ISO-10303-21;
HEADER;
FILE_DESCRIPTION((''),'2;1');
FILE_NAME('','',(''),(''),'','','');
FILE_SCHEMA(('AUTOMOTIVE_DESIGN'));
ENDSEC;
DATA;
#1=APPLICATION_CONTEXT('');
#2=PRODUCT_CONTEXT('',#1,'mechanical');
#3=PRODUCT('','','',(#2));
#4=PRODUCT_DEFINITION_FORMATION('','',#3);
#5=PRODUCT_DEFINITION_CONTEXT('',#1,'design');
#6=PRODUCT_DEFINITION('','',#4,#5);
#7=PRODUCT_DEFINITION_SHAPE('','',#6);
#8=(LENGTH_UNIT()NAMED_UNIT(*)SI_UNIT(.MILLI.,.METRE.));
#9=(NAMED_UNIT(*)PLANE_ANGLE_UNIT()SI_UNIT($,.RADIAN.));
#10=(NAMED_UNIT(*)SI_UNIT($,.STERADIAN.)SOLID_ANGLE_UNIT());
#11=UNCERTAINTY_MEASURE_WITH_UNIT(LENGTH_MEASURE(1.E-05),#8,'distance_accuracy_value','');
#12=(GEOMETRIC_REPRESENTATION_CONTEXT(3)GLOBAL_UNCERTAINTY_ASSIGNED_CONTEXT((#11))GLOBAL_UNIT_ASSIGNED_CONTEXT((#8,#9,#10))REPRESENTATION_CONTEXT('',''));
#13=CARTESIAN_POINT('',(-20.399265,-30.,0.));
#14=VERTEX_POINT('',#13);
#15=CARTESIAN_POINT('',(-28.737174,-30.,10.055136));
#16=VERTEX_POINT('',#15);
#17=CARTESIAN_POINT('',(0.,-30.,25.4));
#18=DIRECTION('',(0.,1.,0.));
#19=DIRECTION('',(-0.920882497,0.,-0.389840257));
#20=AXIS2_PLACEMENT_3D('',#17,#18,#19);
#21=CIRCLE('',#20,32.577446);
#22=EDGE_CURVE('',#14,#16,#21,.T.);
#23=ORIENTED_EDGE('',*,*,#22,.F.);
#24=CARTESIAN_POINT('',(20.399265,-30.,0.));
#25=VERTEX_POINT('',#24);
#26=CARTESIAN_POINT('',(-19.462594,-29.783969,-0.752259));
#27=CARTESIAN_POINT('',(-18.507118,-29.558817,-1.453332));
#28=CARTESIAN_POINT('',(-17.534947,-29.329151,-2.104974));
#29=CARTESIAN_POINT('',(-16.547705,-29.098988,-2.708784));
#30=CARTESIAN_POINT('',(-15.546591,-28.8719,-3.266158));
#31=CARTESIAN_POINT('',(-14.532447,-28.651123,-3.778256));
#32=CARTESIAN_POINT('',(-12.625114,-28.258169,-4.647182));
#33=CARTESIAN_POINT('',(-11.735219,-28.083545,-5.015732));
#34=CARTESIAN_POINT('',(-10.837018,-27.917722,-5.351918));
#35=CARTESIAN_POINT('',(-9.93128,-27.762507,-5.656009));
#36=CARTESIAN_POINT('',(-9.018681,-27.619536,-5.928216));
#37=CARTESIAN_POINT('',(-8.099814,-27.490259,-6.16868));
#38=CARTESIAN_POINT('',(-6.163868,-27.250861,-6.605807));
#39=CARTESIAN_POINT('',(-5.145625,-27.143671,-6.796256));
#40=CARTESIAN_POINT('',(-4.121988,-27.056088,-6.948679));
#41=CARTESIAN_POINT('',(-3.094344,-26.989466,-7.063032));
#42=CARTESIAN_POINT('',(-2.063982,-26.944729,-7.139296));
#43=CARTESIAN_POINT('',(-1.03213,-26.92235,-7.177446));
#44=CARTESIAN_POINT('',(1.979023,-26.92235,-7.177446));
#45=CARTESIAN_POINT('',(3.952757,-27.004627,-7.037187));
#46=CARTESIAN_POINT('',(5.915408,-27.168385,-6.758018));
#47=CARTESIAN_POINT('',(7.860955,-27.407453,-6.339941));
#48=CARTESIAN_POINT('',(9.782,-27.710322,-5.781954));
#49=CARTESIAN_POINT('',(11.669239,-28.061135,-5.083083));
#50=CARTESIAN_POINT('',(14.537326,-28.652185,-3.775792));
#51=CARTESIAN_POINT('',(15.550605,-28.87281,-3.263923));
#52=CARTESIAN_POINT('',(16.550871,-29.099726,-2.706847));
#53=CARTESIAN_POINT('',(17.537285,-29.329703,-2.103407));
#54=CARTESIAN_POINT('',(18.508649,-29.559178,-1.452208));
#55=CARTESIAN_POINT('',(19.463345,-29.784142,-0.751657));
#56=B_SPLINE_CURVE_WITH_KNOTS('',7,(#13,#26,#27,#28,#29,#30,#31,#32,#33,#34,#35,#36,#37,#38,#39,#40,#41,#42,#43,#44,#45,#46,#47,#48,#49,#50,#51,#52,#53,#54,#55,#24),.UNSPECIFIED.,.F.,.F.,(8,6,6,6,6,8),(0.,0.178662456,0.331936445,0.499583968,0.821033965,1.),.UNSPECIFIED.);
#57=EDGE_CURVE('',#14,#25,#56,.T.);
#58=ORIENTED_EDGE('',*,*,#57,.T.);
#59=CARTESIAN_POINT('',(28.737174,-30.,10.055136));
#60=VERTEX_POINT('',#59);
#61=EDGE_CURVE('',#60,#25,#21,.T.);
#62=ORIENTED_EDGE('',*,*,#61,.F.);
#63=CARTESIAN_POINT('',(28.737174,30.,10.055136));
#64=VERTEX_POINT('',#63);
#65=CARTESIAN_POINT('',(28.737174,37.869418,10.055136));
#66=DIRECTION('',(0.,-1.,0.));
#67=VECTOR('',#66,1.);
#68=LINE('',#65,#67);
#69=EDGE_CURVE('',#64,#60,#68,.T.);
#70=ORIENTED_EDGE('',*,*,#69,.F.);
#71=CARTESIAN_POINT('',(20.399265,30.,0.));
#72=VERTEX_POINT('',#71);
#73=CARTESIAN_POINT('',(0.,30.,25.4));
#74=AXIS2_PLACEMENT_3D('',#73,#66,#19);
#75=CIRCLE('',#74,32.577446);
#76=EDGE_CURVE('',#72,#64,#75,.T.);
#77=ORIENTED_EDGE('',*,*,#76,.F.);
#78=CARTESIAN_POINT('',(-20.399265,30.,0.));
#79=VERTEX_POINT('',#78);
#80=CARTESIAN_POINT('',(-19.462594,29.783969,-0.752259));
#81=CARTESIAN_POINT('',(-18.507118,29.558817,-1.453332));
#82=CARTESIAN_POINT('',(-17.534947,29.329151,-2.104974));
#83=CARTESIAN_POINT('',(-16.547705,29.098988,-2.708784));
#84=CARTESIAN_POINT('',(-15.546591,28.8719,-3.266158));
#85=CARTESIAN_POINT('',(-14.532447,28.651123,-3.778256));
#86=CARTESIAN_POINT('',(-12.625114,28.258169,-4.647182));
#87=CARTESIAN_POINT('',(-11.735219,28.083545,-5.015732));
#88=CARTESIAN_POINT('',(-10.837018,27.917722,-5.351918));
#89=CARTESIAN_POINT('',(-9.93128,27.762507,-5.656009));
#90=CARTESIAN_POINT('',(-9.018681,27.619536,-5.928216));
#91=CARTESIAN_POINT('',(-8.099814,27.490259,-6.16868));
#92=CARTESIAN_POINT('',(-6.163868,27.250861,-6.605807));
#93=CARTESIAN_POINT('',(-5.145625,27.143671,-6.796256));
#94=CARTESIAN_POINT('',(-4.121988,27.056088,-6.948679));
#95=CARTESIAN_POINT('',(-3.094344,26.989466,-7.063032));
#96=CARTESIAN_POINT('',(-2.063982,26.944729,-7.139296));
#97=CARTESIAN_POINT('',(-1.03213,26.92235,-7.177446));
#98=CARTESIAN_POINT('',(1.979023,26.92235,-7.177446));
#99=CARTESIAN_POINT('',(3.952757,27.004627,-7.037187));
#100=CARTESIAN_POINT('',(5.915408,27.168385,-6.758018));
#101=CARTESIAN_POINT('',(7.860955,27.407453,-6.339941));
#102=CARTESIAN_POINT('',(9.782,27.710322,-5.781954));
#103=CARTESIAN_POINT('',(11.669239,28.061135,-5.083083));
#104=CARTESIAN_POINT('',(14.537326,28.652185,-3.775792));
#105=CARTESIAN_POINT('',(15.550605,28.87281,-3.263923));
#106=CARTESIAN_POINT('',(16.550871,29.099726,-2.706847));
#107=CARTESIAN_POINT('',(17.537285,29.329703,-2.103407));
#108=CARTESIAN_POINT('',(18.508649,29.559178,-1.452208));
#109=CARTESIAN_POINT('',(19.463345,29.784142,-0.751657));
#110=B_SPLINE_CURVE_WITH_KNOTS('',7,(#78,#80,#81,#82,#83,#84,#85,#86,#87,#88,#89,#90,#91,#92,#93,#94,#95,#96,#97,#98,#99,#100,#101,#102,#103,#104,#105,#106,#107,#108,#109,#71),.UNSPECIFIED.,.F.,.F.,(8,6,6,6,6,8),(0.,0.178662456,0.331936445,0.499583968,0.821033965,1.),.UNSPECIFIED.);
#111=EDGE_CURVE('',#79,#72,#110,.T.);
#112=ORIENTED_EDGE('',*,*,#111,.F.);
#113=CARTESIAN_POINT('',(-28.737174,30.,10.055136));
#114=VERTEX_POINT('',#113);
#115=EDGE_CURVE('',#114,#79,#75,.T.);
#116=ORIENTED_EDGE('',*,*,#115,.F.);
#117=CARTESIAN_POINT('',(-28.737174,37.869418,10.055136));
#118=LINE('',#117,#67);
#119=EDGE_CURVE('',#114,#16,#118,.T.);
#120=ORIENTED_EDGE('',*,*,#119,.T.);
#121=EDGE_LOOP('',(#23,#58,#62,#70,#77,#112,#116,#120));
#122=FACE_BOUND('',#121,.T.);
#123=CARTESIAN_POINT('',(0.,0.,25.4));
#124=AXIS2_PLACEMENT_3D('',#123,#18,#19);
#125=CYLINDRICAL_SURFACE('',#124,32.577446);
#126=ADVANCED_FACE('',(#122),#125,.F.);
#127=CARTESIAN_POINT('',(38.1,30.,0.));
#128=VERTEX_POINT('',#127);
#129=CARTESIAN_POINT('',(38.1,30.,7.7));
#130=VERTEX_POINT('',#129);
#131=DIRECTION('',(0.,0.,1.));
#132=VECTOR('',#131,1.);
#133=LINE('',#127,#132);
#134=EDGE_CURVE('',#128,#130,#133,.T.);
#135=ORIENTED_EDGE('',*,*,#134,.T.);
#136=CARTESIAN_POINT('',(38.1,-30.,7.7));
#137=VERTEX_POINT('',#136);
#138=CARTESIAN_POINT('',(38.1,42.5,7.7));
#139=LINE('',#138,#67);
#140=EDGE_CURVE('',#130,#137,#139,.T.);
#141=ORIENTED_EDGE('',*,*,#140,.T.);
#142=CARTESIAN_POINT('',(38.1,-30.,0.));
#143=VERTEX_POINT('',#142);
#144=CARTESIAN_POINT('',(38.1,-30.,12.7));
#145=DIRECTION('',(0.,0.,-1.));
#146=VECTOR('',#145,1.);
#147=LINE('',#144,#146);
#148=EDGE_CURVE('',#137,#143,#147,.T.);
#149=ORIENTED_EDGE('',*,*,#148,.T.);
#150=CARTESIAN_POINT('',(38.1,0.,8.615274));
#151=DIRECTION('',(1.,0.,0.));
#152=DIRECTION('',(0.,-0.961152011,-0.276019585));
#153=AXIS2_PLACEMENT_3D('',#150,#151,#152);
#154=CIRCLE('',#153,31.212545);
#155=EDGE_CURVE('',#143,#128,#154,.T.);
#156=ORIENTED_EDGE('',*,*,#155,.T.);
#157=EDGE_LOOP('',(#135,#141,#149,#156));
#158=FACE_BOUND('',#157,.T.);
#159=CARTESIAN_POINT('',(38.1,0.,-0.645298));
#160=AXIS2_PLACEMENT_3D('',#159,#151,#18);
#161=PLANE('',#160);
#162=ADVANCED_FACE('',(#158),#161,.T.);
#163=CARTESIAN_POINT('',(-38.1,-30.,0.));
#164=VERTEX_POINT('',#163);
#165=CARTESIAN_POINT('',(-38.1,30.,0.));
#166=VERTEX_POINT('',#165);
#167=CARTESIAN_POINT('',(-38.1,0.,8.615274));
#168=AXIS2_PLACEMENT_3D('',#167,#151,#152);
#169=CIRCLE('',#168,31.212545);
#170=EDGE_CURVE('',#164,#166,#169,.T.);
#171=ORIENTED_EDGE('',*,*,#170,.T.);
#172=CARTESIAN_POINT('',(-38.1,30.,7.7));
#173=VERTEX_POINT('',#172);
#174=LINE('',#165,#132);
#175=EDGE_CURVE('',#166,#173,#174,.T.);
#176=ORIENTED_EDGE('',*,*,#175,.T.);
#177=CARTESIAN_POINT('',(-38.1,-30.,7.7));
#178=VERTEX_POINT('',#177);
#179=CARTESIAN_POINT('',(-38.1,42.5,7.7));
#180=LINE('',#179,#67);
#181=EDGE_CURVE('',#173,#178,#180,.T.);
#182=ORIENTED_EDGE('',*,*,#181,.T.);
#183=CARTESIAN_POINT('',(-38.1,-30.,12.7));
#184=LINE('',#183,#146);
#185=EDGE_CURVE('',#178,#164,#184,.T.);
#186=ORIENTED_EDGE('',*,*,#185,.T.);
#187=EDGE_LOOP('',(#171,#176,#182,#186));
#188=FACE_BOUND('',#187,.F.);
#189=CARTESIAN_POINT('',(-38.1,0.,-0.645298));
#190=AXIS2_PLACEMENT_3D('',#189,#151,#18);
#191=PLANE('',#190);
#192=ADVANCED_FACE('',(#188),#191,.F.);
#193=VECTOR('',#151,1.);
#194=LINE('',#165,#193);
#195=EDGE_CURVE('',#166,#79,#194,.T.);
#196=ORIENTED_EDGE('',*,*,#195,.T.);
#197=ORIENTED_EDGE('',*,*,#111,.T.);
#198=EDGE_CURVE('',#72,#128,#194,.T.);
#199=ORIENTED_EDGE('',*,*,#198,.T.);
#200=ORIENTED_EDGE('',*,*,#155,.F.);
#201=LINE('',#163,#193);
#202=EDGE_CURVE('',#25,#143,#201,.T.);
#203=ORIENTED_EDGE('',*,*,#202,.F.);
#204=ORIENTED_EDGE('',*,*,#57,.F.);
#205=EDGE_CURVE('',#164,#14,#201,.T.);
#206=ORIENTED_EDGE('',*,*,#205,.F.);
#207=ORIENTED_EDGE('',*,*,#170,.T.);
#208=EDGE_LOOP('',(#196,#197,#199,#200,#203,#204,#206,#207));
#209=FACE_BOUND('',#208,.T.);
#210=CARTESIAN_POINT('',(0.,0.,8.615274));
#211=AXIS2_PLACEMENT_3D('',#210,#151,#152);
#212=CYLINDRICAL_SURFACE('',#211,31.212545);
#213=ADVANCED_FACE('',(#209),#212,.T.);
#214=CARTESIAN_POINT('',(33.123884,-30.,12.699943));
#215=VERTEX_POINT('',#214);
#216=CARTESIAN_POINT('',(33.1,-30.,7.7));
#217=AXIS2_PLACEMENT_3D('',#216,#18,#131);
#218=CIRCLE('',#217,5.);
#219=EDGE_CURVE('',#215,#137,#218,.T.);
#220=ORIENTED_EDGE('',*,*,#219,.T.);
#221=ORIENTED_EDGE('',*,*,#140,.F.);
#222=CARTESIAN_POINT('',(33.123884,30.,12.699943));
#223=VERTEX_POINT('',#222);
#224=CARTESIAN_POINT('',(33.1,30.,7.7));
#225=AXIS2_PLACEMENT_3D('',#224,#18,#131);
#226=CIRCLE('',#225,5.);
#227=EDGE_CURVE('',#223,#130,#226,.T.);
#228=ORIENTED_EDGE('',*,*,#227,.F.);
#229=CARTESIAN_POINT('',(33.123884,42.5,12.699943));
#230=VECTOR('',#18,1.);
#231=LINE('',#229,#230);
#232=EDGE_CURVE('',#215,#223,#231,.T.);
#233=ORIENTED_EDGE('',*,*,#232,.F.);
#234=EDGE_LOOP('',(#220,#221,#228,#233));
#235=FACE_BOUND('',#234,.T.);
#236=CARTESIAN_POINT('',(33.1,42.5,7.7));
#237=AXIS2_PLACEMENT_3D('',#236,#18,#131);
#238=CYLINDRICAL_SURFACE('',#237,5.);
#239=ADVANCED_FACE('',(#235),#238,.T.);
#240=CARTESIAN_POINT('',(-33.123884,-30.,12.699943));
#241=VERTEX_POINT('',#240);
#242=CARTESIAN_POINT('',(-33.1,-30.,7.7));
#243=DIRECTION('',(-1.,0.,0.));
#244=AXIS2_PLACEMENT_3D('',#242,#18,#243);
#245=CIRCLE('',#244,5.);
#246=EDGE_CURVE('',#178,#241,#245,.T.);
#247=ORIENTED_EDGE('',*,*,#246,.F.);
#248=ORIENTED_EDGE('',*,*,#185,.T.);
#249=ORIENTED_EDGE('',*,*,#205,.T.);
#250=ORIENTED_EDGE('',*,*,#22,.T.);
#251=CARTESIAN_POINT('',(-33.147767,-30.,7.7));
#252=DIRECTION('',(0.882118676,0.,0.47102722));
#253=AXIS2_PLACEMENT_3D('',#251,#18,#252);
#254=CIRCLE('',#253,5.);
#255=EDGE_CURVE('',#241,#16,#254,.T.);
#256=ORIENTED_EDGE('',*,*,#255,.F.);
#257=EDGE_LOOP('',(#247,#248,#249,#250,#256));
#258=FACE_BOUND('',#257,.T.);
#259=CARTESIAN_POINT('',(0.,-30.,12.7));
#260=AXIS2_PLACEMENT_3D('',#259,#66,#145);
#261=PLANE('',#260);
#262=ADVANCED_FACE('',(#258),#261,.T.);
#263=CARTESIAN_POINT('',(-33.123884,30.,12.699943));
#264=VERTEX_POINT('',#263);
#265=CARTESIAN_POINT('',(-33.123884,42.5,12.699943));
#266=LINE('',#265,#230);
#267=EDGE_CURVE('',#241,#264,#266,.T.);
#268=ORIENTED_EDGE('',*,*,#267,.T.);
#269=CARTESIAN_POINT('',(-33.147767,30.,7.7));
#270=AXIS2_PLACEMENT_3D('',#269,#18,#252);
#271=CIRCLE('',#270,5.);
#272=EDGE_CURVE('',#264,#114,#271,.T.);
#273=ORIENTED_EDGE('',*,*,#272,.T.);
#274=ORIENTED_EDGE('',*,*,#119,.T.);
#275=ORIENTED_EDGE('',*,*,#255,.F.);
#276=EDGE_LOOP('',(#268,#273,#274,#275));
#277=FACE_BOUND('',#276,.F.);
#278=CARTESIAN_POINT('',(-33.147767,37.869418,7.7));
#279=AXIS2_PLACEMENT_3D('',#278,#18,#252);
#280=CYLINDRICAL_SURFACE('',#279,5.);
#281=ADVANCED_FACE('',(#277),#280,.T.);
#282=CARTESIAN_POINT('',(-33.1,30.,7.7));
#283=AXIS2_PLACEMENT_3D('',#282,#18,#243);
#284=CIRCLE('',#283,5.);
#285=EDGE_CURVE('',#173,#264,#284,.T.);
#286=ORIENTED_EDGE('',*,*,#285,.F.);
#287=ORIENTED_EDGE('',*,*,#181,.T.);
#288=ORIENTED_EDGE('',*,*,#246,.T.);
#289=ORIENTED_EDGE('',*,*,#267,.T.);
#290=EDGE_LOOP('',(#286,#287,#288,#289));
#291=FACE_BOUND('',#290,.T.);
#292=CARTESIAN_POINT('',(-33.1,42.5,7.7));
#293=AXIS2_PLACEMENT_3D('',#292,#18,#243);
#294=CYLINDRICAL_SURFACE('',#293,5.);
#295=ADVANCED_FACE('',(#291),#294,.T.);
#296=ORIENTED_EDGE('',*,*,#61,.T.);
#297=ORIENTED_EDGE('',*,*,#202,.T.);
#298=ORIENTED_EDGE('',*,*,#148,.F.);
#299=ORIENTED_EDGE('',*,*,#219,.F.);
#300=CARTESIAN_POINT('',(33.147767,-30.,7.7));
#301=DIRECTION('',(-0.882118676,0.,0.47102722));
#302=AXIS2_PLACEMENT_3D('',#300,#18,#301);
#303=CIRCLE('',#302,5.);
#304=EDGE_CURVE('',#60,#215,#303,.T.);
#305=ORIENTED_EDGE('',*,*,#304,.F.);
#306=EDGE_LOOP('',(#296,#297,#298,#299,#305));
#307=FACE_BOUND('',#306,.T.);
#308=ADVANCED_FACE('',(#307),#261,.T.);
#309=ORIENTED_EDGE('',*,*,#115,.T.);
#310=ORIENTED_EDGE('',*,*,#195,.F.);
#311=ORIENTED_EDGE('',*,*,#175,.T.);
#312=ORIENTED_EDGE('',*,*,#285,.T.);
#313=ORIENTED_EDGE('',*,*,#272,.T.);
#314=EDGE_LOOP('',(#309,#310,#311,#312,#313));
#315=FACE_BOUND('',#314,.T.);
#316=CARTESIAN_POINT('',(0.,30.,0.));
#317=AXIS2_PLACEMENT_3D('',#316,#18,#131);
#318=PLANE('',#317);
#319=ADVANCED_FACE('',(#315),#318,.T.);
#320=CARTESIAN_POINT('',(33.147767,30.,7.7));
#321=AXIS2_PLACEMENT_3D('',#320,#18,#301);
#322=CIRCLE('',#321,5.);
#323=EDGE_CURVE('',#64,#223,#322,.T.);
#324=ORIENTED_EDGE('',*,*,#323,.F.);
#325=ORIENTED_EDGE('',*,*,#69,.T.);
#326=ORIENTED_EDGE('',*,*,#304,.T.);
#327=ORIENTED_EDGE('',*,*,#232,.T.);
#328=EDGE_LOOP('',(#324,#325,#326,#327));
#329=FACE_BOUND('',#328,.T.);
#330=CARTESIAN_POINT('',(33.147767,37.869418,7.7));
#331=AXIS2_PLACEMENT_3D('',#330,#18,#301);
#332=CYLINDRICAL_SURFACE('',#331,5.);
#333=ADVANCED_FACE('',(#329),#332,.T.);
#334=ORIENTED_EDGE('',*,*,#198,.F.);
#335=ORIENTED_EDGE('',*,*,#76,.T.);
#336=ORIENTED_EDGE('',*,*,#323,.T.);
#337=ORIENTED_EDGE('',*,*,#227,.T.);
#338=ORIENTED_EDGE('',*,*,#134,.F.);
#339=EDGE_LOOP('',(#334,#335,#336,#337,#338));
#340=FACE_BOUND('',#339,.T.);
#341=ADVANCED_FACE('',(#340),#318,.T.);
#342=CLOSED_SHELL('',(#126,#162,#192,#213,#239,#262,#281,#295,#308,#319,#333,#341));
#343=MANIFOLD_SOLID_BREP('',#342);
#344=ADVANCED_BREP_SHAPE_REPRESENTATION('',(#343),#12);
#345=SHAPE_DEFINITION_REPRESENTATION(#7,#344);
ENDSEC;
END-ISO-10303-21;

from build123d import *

# Parameters (mm, degrees)
F1_DEPTH      = 38.1
F1_DEPTH_BACK = 38.1
F3_DEPTH      = 30.48
F3_DEPTH_BACK = 30.48
F4_T1_DEPTH   = 85
F4_T3_DEPTH   = 75.73883536


# Not quite as in the source:
# - a fillet or chamfer that OpenCascade refuses, or shapes differently, is made with other operations: its cross-section is extruded or revolved along the edge and cut away or added


with BuildPart() as f1:
    # F0 (on Right) → F1 (new body, two sides)
    with BuildSketch(Plane.YZ) as f1_sk:
        with BuildLine():
            Line((-30, 12.7), (-30, 0))
            ThreePointArc((-30, 0), (0, -22.5972709807), (30, 0))
            Line((30, 0), (30, 12.7))
            Line((30, 12.7), (-30, 12.7))
        make_face()
    extrude(amount=F1_DEPTH)
    extrude(f1_sk.sketch, amount=-F1_DEPTH_BACK)

    # F2 (on Front) → F3 (cut, two sides)
    with BuildSketch(Plane.XZ) as f3_sk:
        with BuildLine():
            Line((30, 12.7), (-30, 12.7))
            ThreePointArc((-30, 12.7), (0, -7.177446186), (30, 12.7))
        make_face()
    extrude(amount=-F3_DEPTH, mode=Mode.SUBTRACT)
    extrude(f3_sk.sketch, amount=F3_DEPTH_BACK, mode=Mode.SUBTRACT)

    # F4: fillet of radius 5 on 4 edges, made by hand

    # F4_s2 → F4_t1 (cut)
    with BuildSketch(Plane.XZ.offset(-42.5)):
        with BuildLine():
            ThreePointArc((-38.1, 7.7), (-36.6355339059, 11.2355339059), (-33.1, 12.7))
            Line((-33.1, 12.7), (-38.1, 12.7))
            Line((-38.1, 12.7), (-38.1, 7.7))
        make_face()
        with BuildLine():
            ThreePointArc((33.1, 12.7), (36.6355339059, 11.2355339059), (38.1, 7.7))
            Line((38.1, 7.7), (38.1, 12.7))
            Line((38.1, 12.7), (33.1, 12.7))
        make_face()
    extrude(amount=F4_T1_DEPTH, mode=Mode.SUBTRACT)

    # F4_s4 → F4_t3 (cut)
    with BuildSketch(Plane.XZ.offset(-37.86941768)):
        with BuildLine():
            ThreePointArc((-28.7371736927, 10.0551360984), (-30.5763550564, 11.988104505), (-33.147767072, 12.7))
            Line((-33.147767072, 12.7), (-30, 12.7))
            ThreePointArc((-30, 12.7), (-29.3983455251, 11.3633593626), (-28.7371736927, 10.0551360984))
        make_face()
        with BuildLine():
            ThreePointArc((28.7371736927, 10.0551360984), (30.5763550564, 11.988104505), (33.147767072, 12.7))
            Line((33.147767072, 12.7), (30, 12.7))
            ThreePointArc((30, 12.7), (29.3983455251, 11.3633593626), (28.7371736927, 10.0551360984))
        make_face()
    extrude(amount=F4_T3_DEPTH, mode=Mode.SUBTRACT)


solid = f1.part
